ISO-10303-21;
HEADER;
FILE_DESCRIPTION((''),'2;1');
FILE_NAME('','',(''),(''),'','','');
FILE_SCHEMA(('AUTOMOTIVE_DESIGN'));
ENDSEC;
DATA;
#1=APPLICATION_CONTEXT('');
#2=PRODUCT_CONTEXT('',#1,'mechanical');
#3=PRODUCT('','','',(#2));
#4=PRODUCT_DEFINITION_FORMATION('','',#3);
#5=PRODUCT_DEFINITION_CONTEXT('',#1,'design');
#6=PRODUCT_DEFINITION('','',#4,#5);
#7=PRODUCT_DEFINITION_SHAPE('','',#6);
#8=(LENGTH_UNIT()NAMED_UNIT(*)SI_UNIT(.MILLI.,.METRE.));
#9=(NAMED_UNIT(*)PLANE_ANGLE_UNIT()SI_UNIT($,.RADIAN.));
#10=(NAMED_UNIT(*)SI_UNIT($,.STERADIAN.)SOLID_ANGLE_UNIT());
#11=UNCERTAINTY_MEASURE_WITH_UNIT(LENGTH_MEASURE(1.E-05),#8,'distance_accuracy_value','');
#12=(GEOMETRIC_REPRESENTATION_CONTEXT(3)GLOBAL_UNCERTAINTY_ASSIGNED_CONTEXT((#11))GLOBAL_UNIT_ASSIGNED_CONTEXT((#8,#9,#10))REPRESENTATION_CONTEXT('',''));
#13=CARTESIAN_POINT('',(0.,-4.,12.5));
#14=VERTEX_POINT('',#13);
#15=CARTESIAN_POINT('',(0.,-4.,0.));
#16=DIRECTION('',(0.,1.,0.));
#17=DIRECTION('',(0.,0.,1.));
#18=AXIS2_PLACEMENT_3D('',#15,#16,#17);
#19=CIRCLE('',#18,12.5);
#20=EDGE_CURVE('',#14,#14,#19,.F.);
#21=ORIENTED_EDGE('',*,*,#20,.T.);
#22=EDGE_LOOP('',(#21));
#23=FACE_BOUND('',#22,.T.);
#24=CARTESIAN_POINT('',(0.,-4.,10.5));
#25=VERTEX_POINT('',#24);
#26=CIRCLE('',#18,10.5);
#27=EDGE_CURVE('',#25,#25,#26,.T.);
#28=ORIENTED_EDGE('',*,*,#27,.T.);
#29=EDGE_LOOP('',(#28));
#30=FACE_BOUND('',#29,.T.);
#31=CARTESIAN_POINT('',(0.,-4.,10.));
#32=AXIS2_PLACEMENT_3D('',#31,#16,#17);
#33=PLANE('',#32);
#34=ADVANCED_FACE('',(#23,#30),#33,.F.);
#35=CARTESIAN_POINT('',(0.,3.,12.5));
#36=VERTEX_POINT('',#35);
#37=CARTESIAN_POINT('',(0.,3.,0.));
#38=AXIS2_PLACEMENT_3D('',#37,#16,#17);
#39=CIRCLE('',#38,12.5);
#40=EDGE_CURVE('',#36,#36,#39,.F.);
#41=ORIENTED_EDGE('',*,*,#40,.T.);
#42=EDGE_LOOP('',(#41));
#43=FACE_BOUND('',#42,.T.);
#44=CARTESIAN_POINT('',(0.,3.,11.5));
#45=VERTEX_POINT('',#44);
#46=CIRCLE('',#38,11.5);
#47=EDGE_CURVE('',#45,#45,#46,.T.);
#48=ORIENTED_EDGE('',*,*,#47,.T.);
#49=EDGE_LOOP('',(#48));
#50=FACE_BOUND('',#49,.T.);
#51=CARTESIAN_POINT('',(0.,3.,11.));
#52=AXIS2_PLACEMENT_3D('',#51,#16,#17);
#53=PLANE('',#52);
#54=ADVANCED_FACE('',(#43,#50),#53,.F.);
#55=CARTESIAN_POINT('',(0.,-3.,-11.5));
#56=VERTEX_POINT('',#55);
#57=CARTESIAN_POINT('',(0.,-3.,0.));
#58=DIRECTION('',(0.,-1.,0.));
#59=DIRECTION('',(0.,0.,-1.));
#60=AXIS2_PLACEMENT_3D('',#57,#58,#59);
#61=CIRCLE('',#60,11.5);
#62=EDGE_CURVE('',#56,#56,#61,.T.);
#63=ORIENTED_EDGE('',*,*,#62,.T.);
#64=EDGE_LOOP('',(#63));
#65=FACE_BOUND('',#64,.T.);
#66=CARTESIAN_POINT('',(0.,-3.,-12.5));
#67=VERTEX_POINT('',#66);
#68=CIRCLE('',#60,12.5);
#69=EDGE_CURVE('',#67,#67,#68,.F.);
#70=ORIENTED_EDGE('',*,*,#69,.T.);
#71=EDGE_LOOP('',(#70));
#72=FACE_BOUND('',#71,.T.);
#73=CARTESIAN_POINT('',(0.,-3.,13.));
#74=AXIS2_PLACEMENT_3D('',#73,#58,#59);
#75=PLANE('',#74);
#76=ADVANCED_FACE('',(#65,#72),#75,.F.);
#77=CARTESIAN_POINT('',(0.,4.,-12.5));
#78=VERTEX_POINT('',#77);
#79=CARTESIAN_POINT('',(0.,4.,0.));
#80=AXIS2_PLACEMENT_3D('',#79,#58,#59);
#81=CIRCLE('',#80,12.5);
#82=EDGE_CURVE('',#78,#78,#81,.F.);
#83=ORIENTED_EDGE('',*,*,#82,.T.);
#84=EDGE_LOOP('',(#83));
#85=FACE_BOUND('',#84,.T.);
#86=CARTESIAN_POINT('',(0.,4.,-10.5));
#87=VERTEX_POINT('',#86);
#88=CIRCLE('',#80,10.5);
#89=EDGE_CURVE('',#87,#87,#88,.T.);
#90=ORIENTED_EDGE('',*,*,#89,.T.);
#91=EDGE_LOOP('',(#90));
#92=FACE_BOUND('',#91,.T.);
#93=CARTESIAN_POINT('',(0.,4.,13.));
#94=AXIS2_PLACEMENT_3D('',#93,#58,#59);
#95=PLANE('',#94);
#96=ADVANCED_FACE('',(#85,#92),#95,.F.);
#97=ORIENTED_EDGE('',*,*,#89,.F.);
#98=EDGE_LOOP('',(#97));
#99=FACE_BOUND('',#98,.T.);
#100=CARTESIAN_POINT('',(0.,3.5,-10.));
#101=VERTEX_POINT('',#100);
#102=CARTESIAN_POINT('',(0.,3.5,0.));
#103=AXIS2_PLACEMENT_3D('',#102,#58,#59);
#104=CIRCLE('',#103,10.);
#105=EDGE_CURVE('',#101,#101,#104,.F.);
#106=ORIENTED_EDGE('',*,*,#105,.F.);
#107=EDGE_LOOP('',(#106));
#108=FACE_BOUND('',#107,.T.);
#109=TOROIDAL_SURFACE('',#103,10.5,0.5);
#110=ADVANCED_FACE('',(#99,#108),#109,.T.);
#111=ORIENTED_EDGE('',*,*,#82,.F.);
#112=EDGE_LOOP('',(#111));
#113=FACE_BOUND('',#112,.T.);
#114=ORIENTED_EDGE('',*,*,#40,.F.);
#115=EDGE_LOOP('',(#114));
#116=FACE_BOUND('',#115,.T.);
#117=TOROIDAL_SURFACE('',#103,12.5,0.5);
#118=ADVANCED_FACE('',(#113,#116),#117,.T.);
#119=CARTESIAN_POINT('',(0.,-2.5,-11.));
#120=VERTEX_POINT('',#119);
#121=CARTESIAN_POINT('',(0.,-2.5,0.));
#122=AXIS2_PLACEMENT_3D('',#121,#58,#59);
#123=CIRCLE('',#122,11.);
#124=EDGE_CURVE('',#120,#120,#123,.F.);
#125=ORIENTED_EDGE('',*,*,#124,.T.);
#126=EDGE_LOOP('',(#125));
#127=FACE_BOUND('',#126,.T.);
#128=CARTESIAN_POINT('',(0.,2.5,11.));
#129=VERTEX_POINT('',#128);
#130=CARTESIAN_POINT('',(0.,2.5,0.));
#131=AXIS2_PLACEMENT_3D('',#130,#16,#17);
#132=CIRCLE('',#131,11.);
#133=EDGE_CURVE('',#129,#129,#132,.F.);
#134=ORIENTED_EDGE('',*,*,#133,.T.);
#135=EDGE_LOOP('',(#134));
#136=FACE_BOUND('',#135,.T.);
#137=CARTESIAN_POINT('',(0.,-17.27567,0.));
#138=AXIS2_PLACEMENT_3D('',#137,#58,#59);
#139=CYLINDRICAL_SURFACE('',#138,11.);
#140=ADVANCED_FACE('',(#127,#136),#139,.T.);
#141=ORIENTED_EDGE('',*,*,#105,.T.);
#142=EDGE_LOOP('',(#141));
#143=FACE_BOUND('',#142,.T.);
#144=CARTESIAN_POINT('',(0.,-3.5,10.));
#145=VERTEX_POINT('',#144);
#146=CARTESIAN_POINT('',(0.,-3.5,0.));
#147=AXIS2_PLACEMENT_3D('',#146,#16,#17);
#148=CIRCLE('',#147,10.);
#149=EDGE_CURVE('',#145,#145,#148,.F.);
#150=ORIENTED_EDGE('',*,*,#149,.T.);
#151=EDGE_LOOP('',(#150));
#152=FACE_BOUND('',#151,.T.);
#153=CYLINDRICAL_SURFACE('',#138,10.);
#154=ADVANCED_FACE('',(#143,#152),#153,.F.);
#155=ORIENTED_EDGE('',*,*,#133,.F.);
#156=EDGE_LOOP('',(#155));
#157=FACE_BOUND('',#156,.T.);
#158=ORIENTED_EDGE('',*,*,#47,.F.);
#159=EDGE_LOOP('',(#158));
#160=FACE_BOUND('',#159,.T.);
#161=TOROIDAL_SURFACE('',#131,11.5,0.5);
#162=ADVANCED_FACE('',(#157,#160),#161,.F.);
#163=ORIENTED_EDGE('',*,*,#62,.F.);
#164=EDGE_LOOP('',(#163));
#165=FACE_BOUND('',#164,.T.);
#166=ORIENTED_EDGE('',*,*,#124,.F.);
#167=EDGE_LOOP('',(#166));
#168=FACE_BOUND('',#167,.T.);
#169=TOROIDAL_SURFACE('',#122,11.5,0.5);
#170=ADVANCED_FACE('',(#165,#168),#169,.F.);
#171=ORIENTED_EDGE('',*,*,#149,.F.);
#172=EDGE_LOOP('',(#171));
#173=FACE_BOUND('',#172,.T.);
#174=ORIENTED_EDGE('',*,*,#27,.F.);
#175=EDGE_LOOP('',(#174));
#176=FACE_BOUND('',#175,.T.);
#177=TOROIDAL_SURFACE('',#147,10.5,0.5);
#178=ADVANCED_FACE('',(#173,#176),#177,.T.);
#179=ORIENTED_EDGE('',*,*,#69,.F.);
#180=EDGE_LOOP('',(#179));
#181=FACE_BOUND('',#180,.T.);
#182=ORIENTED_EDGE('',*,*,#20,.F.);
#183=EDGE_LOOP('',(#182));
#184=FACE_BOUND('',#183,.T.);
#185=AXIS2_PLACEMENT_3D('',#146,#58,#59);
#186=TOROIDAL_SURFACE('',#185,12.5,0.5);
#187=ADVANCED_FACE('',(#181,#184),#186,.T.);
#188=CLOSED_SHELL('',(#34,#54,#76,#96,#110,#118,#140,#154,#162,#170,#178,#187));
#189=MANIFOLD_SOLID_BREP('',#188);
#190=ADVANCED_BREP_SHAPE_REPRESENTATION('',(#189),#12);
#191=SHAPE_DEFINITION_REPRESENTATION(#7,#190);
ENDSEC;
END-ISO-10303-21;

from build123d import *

# Parameters (mm, degrees)
FILLET1_R = 0.5
FILLET2_R = 0.5
FILLET3_R = 0.5


with BuildPart() as part:
    # Sketch2 → Revolve1 (revolve)
    with BuildSketch(Plane.YZ, mode=Mode.PRIVATE) as revolve1_sk:
        Polygon((-4, 10), (-4, 13), (-3, 13), (-3, 11), (3, 11), (3, 13), (4, 13), (4, 10), align=None)
    revolve(revolve1_sk.sketch.rotate(Axis((0, -17.275669785, 0), (0, 1, 0)), 180), axis=Axis((0, -17.275669785, 0), (0, 1, 0)))

    # Fillet1
    fillet1_edges = [part.edges().sort_by_distance(p)[0] for p in [
        (0, -4, 10),
        (0, 4, 10),
        (0, 3, 11),
        (0, -3, 11),
    ]]
    fillet(fillet1_edges, radius=FILLET1_R)

    # Fillet2
    fillet2_edges = [part.edges().sort_by_distance(p)[0] for p in [
        (0, 4, 13),
        (0, 3, 13),
    ]]
    fillet(fillet2_edges, radius=FILLET2_R - 0.0001)  # a hair under: the kernel refuses the full size

    # Fillet3
    fillet3_edges = [part.edges().sort_by_distance(p)[0] for p in [
        (0, -3, 13),
        (0, -4, 13),
    ]]
    fillet(fillet3_edges, radius=FILLET3_R - 0.0001)  # a hair under: the kernel refuses the full size


solid = part.part
